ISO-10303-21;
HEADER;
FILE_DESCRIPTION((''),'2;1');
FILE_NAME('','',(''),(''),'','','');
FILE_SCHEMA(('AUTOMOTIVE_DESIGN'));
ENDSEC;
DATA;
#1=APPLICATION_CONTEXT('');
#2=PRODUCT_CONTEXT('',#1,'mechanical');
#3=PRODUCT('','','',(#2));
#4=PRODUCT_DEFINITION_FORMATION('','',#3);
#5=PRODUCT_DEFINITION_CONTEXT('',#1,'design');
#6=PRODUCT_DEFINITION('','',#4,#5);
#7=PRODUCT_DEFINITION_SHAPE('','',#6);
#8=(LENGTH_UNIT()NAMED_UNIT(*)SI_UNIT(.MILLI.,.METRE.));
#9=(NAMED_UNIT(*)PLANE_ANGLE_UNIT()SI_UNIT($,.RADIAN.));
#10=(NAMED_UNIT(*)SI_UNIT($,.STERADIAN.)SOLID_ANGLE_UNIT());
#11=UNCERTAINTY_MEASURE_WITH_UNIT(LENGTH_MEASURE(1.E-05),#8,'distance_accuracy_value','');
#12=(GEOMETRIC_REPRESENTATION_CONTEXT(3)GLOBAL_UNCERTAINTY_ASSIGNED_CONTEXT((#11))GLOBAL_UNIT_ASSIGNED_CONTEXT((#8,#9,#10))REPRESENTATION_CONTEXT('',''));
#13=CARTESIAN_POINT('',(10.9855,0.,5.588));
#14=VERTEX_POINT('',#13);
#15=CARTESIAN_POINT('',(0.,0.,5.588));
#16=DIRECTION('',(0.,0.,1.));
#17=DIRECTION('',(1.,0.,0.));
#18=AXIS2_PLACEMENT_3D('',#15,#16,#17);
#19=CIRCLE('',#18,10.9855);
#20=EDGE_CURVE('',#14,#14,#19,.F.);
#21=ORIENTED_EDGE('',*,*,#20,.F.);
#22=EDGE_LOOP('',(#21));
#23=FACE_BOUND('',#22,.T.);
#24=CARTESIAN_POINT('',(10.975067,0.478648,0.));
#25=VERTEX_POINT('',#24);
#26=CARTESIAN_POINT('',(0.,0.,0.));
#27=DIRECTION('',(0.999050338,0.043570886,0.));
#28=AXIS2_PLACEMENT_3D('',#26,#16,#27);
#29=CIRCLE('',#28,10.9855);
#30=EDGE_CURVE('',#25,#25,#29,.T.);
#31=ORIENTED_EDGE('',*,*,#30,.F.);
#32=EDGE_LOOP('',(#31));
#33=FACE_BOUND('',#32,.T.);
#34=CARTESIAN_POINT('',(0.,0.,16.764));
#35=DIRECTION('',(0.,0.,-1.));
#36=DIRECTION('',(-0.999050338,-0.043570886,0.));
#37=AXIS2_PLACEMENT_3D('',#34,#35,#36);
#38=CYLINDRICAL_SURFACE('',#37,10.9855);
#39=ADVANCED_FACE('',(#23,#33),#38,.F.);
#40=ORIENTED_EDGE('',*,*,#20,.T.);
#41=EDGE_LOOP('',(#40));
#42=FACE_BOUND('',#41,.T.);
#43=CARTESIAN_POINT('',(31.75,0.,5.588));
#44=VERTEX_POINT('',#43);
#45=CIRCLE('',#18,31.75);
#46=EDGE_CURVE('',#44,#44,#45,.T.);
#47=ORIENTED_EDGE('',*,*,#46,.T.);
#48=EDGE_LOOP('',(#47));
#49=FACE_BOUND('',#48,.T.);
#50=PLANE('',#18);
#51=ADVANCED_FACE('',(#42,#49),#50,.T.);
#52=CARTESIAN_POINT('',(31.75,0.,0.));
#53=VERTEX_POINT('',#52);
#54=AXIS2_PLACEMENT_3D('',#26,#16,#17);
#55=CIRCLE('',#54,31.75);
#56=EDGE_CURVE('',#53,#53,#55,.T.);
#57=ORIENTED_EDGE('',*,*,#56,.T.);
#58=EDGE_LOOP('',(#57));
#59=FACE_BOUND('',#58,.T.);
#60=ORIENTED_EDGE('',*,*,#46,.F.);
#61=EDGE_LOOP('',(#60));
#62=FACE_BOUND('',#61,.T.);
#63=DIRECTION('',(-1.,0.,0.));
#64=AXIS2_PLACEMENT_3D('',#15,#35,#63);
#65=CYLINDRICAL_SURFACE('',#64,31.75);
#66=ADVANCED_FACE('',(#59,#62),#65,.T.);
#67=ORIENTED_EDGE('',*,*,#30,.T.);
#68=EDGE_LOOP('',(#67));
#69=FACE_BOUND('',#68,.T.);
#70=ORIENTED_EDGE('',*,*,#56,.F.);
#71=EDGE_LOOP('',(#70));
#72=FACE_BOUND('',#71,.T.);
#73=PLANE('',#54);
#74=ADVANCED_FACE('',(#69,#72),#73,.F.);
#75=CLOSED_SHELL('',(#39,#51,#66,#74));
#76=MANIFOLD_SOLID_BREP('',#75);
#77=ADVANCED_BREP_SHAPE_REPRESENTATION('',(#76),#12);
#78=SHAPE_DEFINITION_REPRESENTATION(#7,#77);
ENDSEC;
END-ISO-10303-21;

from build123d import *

# Parameters (mm, degrees)
SKETCH1_R           = 31.75
BOSS_EXTRUDE1_DEPTH = 5.588
CAVITY1_OUTLINE_R   = 10.9855
CAVITY1_DEPTH       = 5.588


# Read off the part's stored shape, not the designer's step: Cavity1
with BuildPart() as part:
    # Sketch1 → Boss-Extrude1 (new body)
    with BuildSketch(Plane.XY):
        Circle(SKETCH1_R)
    extrude(amount=BOSS_EXTRUDE1_DEPTH)

    # Cavity1 outline → Cavity1 (cut)
    with BuildSketch(Plane.XY):
        Circle(CAVITY1_OUTLINE_R)
    extrude(amount=CAVITY1_DEPTH, mode=Mode.SUBTRACT)


solid = part.part
